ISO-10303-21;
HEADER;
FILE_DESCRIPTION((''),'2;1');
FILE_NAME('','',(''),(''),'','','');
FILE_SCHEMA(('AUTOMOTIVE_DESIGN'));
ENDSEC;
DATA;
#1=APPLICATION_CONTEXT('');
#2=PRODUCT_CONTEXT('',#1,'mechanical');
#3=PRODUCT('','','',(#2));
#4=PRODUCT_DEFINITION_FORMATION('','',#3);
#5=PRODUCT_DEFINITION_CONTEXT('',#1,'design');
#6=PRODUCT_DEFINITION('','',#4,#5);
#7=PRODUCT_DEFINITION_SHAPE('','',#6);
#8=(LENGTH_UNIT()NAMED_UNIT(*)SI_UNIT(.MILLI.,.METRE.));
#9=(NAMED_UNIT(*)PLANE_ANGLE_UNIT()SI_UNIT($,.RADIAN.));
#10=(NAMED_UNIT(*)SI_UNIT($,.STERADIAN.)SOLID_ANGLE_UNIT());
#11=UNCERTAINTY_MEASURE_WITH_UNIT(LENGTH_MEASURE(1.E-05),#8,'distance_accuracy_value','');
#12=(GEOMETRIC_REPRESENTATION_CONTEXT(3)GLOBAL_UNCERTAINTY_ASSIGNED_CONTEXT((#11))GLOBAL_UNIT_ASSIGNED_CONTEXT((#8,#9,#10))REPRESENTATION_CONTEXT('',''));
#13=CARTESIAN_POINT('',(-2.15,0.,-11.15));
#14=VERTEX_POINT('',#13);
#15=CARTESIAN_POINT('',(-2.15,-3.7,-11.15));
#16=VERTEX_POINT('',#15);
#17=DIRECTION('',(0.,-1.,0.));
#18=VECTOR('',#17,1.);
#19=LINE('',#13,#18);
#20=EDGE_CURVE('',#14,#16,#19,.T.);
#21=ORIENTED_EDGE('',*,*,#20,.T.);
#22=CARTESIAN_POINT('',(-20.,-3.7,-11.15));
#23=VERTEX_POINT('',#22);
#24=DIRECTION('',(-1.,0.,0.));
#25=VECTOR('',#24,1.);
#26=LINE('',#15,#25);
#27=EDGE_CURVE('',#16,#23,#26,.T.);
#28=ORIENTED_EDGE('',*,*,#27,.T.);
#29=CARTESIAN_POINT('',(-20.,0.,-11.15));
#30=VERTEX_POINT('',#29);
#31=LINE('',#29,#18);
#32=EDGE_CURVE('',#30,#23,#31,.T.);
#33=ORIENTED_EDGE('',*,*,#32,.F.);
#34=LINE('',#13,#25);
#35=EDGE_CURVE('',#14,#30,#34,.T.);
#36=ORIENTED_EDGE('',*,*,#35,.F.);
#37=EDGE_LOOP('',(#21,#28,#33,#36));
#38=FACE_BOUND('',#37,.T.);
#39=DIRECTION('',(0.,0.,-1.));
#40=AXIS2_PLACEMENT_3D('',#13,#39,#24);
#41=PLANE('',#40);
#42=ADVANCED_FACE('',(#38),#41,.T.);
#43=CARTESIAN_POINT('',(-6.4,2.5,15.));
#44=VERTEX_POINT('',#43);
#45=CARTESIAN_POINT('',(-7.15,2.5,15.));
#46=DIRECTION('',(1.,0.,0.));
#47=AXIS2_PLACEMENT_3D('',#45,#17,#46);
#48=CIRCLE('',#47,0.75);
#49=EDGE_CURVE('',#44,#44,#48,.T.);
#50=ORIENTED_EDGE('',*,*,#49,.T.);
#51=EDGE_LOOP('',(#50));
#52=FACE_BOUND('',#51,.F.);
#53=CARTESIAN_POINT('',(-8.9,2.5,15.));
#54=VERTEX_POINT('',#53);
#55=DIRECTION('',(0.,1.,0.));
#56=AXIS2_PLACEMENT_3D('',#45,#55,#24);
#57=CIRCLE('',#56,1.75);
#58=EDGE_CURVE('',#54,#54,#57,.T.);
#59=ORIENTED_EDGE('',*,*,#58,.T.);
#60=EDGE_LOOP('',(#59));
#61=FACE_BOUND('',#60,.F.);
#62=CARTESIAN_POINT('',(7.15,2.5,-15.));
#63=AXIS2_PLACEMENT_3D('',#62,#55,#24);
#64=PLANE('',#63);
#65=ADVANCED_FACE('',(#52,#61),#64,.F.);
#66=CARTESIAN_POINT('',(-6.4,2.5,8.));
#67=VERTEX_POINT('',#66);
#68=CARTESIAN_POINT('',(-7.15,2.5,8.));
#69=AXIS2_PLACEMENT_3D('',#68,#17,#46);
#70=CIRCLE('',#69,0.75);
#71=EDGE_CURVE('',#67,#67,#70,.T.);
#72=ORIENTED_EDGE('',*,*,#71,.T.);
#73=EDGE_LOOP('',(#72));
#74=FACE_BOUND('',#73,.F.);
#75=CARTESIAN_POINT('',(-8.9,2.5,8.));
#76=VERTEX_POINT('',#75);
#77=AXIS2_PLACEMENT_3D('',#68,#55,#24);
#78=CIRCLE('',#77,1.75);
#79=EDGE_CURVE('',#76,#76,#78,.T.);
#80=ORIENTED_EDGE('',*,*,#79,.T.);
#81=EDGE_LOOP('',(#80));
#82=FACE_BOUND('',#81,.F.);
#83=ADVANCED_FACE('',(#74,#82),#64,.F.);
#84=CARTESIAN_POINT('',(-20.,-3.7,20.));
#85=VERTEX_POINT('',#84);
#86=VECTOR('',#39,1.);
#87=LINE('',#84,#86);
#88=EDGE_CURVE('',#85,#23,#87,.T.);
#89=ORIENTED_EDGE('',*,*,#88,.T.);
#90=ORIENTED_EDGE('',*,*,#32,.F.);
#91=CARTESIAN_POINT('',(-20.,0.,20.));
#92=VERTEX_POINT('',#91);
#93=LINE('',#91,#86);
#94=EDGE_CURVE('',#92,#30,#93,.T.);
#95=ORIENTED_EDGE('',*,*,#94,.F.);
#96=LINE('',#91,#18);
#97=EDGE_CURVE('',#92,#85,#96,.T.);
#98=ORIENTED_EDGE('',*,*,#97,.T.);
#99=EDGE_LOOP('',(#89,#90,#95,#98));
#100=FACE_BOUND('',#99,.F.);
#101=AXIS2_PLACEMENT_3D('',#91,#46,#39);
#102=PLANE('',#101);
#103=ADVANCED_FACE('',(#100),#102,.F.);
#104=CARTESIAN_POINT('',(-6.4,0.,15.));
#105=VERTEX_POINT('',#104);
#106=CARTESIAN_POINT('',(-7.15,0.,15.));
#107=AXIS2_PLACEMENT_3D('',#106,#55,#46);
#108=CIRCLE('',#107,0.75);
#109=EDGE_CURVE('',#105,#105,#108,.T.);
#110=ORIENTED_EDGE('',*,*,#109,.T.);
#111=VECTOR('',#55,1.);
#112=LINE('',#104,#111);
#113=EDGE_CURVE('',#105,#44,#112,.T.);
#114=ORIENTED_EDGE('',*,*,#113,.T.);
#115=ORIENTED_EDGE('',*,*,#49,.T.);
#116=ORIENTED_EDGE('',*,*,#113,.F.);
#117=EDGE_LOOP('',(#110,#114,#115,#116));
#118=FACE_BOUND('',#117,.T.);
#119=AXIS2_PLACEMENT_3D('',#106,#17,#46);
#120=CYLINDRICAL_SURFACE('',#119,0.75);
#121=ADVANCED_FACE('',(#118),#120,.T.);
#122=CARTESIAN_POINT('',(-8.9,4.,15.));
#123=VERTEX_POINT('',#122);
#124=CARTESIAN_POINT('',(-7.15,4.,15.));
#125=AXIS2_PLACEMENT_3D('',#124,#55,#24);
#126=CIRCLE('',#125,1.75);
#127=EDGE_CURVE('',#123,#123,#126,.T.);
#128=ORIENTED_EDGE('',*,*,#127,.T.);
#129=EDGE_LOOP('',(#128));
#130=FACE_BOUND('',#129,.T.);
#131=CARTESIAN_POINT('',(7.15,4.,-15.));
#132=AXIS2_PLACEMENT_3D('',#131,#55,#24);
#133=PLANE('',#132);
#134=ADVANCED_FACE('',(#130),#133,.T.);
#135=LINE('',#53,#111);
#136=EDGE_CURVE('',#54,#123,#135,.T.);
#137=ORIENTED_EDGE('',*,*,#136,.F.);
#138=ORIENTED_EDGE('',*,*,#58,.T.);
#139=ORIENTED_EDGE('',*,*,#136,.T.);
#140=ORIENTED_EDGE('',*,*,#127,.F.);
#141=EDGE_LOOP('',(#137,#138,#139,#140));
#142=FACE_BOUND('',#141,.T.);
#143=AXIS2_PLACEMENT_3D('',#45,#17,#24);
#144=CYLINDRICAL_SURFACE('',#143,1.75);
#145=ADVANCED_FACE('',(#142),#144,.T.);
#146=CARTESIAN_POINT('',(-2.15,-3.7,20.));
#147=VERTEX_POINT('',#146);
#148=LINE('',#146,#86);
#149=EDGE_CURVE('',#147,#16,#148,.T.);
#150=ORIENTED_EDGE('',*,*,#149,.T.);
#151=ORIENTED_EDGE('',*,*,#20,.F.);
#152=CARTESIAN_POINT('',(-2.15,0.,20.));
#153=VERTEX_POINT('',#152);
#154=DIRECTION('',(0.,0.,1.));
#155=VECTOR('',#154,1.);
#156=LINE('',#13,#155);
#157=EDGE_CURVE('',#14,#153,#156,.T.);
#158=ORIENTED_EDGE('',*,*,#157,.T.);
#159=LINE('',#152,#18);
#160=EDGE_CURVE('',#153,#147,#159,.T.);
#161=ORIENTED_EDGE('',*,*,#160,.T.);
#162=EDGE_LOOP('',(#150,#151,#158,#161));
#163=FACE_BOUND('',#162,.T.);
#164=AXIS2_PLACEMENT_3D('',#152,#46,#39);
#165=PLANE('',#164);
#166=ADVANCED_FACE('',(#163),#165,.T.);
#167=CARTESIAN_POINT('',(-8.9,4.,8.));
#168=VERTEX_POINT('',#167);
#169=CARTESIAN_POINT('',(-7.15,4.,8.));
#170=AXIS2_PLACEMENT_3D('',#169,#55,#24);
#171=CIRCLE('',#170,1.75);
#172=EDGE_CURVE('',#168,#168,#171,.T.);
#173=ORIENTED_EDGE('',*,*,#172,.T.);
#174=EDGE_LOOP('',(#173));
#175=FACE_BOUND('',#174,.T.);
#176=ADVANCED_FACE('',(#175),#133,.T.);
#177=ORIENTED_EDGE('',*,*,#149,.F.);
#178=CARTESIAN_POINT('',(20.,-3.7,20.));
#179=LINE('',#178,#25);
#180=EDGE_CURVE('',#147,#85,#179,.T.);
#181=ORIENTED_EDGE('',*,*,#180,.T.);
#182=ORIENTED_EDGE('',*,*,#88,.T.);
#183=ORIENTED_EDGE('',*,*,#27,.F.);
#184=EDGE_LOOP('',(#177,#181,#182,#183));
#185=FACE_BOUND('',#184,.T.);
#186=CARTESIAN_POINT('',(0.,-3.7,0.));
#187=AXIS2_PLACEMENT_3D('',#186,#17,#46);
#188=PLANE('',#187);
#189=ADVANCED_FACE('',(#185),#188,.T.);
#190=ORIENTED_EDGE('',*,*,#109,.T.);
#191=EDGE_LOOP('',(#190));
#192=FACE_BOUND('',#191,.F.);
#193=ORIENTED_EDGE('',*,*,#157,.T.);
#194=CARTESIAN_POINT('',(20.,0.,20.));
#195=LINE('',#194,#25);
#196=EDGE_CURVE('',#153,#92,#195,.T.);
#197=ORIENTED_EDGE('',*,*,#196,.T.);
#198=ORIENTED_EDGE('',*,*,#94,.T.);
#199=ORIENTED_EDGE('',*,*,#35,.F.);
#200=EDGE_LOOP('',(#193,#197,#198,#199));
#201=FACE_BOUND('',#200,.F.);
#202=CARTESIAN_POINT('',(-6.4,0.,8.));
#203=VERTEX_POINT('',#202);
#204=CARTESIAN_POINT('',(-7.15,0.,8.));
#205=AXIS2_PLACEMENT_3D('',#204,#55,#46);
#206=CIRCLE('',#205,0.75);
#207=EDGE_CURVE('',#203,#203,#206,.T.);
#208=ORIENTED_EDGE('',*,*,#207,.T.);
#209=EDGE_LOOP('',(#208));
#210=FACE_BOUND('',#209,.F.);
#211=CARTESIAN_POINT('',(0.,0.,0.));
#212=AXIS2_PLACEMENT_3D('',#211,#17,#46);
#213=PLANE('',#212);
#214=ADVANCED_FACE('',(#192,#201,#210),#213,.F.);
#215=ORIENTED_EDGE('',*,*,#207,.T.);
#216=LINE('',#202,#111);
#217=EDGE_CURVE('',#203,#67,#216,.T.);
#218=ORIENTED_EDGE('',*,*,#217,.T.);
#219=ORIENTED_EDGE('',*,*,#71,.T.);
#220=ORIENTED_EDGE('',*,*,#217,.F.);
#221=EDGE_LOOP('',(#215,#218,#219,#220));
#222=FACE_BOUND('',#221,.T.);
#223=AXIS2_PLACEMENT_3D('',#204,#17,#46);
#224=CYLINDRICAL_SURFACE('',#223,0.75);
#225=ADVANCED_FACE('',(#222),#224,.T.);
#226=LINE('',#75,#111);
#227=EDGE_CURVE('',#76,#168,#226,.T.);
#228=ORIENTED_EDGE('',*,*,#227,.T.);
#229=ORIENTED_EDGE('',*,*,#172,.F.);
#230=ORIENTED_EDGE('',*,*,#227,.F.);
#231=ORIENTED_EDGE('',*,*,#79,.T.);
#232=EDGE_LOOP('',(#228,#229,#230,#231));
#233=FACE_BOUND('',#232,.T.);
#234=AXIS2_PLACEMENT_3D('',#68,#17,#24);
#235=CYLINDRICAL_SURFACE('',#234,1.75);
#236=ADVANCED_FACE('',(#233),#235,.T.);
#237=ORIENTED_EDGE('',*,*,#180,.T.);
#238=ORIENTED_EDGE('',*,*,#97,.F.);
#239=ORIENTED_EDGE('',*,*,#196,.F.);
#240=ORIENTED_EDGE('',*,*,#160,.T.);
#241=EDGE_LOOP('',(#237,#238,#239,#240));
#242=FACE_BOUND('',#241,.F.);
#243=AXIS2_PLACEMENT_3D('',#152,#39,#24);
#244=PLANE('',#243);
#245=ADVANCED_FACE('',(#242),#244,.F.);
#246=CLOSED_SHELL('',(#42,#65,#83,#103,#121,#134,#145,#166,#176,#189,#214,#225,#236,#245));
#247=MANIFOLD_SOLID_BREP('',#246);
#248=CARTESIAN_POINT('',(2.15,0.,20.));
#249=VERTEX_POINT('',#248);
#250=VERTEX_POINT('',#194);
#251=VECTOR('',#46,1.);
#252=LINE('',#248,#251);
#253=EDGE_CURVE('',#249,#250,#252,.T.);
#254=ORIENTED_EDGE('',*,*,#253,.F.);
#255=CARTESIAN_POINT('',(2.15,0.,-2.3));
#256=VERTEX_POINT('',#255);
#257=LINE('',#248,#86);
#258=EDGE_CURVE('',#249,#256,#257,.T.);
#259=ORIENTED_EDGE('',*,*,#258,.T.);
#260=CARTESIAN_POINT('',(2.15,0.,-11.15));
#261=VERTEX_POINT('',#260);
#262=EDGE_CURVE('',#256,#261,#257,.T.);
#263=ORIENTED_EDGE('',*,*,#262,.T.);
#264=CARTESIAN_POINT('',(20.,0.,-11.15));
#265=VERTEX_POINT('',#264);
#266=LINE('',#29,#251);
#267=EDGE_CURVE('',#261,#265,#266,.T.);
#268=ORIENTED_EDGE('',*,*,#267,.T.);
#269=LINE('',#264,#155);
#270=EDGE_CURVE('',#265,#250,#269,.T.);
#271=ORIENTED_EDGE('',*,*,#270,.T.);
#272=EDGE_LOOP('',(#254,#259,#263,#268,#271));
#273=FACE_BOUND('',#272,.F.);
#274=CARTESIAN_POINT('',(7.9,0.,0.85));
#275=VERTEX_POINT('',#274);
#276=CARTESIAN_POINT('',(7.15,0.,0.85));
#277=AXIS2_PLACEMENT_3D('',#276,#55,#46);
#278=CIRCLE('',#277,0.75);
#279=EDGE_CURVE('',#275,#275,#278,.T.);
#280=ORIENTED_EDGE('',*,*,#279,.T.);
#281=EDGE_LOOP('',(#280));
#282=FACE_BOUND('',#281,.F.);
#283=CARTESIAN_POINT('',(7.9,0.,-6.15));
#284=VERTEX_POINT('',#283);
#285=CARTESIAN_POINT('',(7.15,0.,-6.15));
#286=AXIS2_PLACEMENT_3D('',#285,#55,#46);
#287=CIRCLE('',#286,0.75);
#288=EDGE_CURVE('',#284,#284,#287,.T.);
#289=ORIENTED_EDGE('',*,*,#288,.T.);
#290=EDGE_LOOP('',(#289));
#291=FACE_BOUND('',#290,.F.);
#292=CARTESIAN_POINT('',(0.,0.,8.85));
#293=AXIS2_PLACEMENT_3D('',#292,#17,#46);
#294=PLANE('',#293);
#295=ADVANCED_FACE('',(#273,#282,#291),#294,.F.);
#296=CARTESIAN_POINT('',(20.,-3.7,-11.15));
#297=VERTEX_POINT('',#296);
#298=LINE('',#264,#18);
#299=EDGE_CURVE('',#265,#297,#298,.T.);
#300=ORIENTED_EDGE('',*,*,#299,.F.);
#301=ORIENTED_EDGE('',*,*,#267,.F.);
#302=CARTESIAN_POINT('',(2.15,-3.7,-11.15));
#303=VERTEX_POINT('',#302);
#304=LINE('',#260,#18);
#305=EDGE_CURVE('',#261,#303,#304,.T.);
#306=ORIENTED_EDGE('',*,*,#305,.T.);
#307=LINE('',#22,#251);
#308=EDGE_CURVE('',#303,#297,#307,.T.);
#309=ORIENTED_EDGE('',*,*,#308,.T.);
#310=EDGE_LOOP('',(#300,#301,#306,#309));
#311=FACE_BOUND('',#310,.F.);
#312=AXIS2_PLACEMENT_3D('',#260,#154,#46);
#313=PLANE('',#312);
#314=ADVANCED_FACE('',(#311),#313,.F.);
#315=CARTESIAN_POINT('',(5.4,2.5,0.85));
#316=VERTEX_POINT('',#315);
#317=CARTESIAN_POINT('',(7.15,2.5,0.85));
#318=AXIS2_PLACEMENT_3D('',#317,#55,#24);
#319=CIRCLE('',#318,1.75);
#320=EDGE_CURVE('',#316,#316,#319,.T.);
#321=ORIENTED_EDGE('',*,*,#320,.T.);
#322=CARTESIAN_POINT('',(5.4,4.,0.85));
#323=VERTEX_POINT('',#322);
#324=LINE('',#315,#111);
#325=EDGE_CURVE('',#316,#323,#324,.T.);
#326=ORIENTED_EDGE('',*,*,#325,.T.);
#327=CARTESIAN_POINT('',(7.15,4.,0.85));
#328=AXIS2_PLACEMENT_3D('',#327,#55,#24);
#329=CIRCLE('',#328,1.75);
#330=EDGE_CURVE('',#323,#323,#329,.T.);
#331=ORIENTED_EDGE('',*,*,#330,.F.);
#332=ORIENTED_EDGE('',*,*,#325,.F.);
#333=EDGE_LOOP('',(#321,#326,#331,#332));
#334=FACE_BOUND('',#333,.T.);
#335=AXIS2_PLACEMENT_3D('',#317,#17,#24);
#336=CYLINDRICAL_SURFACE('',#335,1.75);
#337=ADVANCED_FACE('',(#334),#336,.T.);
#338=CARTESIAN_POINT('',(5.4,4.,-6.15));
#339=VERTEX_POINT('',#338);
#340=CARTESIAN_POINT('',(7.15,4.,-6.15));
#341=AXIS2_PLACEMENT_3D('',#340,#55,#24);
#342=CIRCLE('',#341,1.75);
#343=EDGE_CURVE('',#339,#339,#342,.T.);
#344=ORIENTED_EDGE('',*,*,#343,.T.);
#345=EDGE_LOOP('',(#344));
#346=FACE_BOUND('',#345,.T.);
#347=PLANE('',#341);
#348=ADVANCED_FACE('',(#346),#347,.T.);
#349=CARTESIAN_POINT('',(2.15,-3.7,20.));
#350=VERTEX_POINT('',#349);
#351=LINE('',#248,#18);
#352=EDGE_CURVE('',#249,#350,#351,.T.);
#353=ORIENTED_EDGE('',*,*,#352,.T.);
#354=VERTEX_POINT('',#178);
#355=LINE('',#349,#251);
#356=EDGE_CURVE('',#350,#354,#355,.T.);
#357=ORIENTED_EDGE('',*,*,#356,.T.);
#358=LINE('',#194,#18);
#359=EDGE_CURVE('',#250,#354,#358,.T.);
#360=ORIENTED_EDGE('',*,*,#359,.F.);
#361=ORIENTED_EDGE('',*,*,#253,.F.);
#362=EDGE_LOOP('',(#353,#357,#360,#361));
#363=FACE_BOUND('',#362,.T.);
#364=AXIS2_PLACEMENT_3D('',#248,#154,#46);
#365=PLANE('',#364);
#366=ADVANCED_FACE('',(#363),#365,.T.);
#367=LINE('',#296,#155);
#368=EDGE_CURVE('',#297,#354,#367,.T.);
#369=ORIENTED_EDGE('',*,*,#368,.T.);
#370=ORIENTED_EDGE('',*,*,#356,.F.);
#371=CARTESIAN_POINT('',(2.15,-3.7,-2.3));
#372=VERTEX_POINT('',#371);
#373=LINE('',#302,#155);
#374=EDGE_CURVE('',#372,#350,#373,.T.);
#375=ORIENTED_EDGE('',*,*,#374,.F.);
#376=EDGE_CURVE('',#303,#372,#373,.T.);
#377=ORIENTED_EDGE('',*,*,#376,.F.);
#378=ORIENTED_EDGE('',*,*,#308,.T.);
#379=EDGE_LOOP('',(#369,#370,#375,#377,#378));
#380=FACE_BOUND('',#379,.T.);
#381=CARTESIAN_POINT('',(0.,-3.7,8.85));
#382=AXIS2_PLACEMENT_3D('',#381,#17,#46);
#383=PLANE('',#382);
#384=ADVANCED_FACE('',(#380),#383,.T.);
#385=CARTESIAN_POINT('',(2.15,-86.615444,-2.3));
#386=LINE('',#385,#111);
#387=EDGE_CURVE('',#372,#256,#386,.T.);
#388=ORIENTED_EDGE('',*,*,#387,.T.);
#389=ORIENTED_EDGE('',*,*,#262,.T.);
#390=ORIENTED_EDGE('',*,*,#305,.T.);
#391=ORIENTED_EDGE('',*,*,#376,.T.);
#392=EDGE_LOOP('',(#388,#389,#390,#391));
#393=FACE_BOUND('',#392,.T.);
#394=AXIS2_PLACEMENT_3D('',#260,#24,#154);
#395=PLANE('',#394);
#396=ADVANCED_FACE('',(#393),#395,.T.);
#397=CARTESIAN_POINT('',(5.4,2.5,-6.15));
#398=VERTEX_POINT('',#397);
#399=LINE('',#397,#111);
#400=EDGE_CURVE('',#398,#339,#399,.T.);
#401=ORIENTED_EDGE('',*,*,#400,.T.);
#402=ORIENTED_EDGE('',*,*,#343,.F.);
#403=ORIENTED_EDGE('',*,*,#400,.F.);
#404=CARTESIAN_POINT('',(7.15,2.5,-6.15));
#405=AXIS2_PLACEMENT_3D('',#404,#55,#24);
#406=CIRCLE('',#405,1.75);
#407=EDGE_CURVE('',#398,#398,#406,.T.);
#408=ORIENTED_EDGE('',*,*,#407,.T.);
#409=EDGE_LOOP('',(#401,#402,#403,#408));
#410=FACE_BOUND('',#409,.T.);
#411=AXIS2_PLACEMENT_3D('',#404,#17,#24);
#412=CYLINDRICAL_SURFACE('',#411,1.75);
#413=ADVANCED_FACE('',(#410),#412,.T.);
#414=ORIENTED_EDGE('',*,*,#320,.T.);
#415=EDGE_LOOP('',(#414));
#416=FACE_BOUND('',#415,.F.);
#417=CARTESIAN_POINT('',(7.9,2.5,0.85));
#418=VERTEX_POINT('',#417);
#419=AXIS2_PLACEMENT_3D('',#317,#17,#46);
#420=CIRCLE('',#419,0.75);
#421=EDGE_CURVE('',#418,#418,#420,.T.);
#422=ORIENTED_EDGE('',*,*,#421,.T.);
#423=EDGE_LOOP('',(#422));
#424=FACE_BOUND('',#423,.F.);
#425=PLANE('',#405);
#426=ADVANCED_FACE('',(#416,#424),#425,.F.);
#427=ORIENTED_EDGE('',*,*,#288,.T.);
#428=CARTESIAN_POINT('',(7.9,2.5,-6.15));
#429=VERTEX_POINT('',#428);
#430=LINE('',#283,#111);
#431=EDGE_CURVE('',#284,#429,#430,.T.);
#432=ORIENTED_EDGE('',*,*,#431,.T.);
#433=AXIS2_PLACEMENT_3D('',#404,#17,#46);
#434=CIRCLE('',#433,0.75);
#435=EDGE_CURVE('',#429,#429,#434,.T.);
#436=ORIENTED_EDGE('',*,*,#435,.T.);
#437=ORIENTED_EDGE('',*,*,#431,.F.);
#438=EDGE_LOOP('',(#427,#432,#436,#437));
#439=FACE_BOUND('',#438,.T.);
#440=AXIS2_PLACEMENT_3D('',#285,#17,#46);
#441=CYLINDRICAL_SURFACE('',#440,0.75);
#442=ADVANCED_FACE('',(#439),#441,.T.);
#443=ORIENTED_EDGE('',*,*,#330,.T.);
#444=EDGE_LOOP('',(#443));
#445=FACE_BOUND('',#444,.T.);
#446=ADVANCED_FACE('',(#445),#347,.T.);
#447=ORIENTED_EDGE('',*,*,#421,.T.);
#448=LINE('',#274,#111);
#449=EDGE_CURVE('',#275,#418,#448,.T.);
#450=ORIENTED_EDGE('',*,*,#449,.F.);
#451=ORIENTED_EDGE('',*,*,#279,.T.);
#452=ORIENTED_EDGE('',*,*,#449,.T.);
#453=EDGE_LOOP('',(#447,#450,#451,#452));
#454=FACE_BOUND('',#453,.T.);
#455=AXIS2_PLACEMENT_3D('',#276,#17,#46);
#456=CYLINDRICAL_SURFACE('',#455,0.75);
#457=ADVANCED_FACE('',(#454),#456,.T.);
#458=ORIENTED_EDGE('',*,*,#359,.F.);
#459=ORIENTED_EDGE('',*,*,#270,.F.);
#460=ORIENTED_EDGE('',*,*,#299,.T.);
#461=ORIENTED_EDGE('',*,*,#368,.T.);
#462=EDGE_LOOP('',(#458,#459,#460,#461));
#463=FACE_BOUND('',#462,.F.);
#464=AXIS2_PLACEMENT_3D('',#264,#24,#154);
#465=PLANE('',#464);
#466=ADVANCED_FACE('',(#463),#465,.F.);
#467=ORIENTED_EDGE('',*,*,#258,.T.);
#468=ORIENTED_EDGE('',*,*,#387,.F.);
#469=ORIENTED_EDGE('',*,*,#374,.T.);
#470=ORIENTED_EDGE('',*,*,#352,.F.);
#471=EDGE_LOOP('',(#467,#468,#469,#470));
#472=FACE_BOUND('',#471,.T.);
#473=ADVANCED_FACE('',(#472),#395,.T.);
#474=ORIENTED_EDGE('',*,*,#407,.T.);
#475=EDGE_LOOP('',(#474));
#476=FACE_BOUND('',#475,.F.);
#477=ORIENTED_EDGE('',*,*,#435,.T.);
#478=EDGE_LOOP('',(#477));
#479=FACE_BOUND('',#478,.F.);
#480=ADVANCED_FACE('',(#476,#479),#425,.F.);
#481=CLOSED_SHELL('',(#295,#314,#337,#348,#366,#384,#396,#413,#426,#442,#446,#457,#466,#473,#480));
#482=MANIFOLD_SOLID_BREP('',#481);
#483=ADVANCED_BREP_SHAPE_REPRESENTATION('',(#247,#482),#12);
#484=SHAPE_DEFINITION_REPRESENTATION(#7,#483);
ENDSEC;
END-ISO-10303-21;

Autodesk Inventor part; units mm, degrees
ref_plane "YZ Plane" through (0, 0, 0) normal (1, 0, 0) x (0, 1, 0)
ref_plane "XZ Plane" through (0, 0, 0) normal (0, 1, 0) x (-1, 0, 0)
ref_plane "XY Plane" through (0, 0, 0) normal (0, 0, 1) x (1, 0, 0)
sketch "Sketch4" plane through (0, 0, 0) normal (0, 1, 0) x (-1, 0, 0)
  line L0 (20, 20) -> (-20, 20)
  line L1 (-20, 20) -> (-20, -20)
  line L2 (-20, -20) -> (20, -20)
  line L3 (20, -20) -> (20, 20)
  line L4 (20, 20) -> (-20, -20) construction
  line L5 (-20, 20) -> (20, -20) construction
  line L6 (2.15, 11.15) -> (-2.15, 11.15)
  line L7 (-2.15, 11.15) -> (-2.15, -11.15)
  line L8 (-2.15, -11.15) -> (2.15, -11.15)
  line L9 (2.15, -11.15) -> (2.15, 11.15)
  line L10 (2.15, 11.15) -> (-2.15, -11.15) construction
  line L11 (-2.15, 11.15) -> (2.15, -11.15) construction
  line L12 (2.15, 11.15) -> (20, 11.15)
  line L13 (20, 11.15) -> (20, -20)
  line L14 (20, -20) -> (2.15, -20)
  line L15 (2.15, -20) -> (2.15, 11.15)
  line L16 (-2.15, -11.15) -> (-20, -11.15)
  line L17 (-20, -11.15) -> (-20, 20)
  line L18 (-20, 20) -> (-2.15, 20)
  line L19 (-2.15, 20) -> (-2.15, -11.15)
  point P0 (0, 0)
  point P1 (-2.15, 20)
  point P2 (2.15, -20)
  dimension "d26" = 40
  dimension "d27" = 40
  dimension "d28" = 4.3
  dimension "d29" = 22.3
extrude "Extrusion4" add sketch "Sketch4" along normal blind 3.7 contours L19 L7 L16 L1 L0 | L3 L2 L15 L9 L12
sketch "Sketch5" plane through (0, 0, 0) normal (0, 1, 0) x (-1, 0, 0)
  line L0 (2.15, -20) -> (20, -20) projected
  line L1 (2.15, -20) -> (7.15, -20)
  line L2 (7.15, -20) -> (7.15, -15)
  line L3 (7.15, -15) -> (2.15, -15)
  line L4 (2.15, -15) -> (2.15, -20)
  line L5 (2.15, -20) -> (7.15, -20)
  line L6 (7.15, -20) -> (7.15, -8)
  line L7 (7.15, -8) -> (2.15, -8)
  line L8 (2.15, -8) -> (2.15, -20)
  line L9 (-2.15, -11.15) -> (-2.15, 20) projected
  line L10 (-2.15, 20) -> (-7.15, 20)
  line L11 (-7.15, 20) -> (-7.15, 15)
  line L12 (-7.15, 15) -> (-2.15, 15)
  line L13 (-2.15, 15) -> (-2.15, 20)
  line L14 (-2.15, 20) -> (-7.15, 20)
  line L15 (-7.15, 20) -> (-7.15, 8)
  line L16 (-7.15, 8) -> (-2.15, 8)
  line L17 (-2.15, 8) -> (-2.15, 20)
  circle A0 centre (-7.15, 8) radius 0.75
  circle A1 centre (-7.15, 15) radius 0.75
  circle A2 centre (7.15, -15) radius 0.75
  circle A3 centre (7.15, -8) radius 0.75
  point P0 (0, 0)
  dimension "d32" = 5
  dimension "d33" = 5
  dimension "d34" = 12
  dimension "d35" = 5
  dimension "d36" = 5
  dimension "d37" = 12
  dimension "d38" = 1.5
  dimension "d39" = 1.5
  dimension "d40" = 1.5
  dimension "d41" = 1.5
extrude "Extrusion5" add sketch "Sketch5" against normal blind 2.5 contours A2 L3 L2 | L2 L6 A2 | A2 L6 L3 | A3 L6 L7 | L7 L6 A3 | A0 L15 L16 | L16 L15 A0 | A1 L15 L12 | L12 L11 A1 | L15 A1 L11
sketch "Sketch6" plane through (-7.15, -2.5, -15) normal (0, -1, 0) x (1, 0, 0)
  circle A0 centre (0, 0) radius 1.75
  circle A1 centre (0, 7) radius 0.75 projected
  circle A2 centre (0, 7) radius 1.75
  circle A3 centre (14.3, 23) radius 0.75 projected
  circle A4 centre (14.3, 23) radius 1.75
  circle A5 centre (14.3, 30) radius 0.75 projected
  circle A6 centre (14.3, 30) radius 1.75
  point P0 (7.15, 15)
  dimension "d44" = 3.5
  dimension "d45" = 3.5
  dimension "d46" = 3.5
  dimension "d47" = 3.5
extrude "Extrusion6" add sketch "Sketch6" along normal blind 1.5 contours A0 | A1 | A2 | A3 | A4 | A5 | A6
move or copy body "Move Body1" bodies to move or copy 1 copy no rotation origin (0, 0, 0) rotation axis (0, 0, 1) rotation angle -180
split body "Split1" sketch "Sketch4" result two bodies curves L18 L19 first body at (-14.05, -3.2, 9.6167)
move or copy body "Move Body2" bodies to move or copy 3 copy no translate (0, 0, 8.85)
properties part number "top-big"
